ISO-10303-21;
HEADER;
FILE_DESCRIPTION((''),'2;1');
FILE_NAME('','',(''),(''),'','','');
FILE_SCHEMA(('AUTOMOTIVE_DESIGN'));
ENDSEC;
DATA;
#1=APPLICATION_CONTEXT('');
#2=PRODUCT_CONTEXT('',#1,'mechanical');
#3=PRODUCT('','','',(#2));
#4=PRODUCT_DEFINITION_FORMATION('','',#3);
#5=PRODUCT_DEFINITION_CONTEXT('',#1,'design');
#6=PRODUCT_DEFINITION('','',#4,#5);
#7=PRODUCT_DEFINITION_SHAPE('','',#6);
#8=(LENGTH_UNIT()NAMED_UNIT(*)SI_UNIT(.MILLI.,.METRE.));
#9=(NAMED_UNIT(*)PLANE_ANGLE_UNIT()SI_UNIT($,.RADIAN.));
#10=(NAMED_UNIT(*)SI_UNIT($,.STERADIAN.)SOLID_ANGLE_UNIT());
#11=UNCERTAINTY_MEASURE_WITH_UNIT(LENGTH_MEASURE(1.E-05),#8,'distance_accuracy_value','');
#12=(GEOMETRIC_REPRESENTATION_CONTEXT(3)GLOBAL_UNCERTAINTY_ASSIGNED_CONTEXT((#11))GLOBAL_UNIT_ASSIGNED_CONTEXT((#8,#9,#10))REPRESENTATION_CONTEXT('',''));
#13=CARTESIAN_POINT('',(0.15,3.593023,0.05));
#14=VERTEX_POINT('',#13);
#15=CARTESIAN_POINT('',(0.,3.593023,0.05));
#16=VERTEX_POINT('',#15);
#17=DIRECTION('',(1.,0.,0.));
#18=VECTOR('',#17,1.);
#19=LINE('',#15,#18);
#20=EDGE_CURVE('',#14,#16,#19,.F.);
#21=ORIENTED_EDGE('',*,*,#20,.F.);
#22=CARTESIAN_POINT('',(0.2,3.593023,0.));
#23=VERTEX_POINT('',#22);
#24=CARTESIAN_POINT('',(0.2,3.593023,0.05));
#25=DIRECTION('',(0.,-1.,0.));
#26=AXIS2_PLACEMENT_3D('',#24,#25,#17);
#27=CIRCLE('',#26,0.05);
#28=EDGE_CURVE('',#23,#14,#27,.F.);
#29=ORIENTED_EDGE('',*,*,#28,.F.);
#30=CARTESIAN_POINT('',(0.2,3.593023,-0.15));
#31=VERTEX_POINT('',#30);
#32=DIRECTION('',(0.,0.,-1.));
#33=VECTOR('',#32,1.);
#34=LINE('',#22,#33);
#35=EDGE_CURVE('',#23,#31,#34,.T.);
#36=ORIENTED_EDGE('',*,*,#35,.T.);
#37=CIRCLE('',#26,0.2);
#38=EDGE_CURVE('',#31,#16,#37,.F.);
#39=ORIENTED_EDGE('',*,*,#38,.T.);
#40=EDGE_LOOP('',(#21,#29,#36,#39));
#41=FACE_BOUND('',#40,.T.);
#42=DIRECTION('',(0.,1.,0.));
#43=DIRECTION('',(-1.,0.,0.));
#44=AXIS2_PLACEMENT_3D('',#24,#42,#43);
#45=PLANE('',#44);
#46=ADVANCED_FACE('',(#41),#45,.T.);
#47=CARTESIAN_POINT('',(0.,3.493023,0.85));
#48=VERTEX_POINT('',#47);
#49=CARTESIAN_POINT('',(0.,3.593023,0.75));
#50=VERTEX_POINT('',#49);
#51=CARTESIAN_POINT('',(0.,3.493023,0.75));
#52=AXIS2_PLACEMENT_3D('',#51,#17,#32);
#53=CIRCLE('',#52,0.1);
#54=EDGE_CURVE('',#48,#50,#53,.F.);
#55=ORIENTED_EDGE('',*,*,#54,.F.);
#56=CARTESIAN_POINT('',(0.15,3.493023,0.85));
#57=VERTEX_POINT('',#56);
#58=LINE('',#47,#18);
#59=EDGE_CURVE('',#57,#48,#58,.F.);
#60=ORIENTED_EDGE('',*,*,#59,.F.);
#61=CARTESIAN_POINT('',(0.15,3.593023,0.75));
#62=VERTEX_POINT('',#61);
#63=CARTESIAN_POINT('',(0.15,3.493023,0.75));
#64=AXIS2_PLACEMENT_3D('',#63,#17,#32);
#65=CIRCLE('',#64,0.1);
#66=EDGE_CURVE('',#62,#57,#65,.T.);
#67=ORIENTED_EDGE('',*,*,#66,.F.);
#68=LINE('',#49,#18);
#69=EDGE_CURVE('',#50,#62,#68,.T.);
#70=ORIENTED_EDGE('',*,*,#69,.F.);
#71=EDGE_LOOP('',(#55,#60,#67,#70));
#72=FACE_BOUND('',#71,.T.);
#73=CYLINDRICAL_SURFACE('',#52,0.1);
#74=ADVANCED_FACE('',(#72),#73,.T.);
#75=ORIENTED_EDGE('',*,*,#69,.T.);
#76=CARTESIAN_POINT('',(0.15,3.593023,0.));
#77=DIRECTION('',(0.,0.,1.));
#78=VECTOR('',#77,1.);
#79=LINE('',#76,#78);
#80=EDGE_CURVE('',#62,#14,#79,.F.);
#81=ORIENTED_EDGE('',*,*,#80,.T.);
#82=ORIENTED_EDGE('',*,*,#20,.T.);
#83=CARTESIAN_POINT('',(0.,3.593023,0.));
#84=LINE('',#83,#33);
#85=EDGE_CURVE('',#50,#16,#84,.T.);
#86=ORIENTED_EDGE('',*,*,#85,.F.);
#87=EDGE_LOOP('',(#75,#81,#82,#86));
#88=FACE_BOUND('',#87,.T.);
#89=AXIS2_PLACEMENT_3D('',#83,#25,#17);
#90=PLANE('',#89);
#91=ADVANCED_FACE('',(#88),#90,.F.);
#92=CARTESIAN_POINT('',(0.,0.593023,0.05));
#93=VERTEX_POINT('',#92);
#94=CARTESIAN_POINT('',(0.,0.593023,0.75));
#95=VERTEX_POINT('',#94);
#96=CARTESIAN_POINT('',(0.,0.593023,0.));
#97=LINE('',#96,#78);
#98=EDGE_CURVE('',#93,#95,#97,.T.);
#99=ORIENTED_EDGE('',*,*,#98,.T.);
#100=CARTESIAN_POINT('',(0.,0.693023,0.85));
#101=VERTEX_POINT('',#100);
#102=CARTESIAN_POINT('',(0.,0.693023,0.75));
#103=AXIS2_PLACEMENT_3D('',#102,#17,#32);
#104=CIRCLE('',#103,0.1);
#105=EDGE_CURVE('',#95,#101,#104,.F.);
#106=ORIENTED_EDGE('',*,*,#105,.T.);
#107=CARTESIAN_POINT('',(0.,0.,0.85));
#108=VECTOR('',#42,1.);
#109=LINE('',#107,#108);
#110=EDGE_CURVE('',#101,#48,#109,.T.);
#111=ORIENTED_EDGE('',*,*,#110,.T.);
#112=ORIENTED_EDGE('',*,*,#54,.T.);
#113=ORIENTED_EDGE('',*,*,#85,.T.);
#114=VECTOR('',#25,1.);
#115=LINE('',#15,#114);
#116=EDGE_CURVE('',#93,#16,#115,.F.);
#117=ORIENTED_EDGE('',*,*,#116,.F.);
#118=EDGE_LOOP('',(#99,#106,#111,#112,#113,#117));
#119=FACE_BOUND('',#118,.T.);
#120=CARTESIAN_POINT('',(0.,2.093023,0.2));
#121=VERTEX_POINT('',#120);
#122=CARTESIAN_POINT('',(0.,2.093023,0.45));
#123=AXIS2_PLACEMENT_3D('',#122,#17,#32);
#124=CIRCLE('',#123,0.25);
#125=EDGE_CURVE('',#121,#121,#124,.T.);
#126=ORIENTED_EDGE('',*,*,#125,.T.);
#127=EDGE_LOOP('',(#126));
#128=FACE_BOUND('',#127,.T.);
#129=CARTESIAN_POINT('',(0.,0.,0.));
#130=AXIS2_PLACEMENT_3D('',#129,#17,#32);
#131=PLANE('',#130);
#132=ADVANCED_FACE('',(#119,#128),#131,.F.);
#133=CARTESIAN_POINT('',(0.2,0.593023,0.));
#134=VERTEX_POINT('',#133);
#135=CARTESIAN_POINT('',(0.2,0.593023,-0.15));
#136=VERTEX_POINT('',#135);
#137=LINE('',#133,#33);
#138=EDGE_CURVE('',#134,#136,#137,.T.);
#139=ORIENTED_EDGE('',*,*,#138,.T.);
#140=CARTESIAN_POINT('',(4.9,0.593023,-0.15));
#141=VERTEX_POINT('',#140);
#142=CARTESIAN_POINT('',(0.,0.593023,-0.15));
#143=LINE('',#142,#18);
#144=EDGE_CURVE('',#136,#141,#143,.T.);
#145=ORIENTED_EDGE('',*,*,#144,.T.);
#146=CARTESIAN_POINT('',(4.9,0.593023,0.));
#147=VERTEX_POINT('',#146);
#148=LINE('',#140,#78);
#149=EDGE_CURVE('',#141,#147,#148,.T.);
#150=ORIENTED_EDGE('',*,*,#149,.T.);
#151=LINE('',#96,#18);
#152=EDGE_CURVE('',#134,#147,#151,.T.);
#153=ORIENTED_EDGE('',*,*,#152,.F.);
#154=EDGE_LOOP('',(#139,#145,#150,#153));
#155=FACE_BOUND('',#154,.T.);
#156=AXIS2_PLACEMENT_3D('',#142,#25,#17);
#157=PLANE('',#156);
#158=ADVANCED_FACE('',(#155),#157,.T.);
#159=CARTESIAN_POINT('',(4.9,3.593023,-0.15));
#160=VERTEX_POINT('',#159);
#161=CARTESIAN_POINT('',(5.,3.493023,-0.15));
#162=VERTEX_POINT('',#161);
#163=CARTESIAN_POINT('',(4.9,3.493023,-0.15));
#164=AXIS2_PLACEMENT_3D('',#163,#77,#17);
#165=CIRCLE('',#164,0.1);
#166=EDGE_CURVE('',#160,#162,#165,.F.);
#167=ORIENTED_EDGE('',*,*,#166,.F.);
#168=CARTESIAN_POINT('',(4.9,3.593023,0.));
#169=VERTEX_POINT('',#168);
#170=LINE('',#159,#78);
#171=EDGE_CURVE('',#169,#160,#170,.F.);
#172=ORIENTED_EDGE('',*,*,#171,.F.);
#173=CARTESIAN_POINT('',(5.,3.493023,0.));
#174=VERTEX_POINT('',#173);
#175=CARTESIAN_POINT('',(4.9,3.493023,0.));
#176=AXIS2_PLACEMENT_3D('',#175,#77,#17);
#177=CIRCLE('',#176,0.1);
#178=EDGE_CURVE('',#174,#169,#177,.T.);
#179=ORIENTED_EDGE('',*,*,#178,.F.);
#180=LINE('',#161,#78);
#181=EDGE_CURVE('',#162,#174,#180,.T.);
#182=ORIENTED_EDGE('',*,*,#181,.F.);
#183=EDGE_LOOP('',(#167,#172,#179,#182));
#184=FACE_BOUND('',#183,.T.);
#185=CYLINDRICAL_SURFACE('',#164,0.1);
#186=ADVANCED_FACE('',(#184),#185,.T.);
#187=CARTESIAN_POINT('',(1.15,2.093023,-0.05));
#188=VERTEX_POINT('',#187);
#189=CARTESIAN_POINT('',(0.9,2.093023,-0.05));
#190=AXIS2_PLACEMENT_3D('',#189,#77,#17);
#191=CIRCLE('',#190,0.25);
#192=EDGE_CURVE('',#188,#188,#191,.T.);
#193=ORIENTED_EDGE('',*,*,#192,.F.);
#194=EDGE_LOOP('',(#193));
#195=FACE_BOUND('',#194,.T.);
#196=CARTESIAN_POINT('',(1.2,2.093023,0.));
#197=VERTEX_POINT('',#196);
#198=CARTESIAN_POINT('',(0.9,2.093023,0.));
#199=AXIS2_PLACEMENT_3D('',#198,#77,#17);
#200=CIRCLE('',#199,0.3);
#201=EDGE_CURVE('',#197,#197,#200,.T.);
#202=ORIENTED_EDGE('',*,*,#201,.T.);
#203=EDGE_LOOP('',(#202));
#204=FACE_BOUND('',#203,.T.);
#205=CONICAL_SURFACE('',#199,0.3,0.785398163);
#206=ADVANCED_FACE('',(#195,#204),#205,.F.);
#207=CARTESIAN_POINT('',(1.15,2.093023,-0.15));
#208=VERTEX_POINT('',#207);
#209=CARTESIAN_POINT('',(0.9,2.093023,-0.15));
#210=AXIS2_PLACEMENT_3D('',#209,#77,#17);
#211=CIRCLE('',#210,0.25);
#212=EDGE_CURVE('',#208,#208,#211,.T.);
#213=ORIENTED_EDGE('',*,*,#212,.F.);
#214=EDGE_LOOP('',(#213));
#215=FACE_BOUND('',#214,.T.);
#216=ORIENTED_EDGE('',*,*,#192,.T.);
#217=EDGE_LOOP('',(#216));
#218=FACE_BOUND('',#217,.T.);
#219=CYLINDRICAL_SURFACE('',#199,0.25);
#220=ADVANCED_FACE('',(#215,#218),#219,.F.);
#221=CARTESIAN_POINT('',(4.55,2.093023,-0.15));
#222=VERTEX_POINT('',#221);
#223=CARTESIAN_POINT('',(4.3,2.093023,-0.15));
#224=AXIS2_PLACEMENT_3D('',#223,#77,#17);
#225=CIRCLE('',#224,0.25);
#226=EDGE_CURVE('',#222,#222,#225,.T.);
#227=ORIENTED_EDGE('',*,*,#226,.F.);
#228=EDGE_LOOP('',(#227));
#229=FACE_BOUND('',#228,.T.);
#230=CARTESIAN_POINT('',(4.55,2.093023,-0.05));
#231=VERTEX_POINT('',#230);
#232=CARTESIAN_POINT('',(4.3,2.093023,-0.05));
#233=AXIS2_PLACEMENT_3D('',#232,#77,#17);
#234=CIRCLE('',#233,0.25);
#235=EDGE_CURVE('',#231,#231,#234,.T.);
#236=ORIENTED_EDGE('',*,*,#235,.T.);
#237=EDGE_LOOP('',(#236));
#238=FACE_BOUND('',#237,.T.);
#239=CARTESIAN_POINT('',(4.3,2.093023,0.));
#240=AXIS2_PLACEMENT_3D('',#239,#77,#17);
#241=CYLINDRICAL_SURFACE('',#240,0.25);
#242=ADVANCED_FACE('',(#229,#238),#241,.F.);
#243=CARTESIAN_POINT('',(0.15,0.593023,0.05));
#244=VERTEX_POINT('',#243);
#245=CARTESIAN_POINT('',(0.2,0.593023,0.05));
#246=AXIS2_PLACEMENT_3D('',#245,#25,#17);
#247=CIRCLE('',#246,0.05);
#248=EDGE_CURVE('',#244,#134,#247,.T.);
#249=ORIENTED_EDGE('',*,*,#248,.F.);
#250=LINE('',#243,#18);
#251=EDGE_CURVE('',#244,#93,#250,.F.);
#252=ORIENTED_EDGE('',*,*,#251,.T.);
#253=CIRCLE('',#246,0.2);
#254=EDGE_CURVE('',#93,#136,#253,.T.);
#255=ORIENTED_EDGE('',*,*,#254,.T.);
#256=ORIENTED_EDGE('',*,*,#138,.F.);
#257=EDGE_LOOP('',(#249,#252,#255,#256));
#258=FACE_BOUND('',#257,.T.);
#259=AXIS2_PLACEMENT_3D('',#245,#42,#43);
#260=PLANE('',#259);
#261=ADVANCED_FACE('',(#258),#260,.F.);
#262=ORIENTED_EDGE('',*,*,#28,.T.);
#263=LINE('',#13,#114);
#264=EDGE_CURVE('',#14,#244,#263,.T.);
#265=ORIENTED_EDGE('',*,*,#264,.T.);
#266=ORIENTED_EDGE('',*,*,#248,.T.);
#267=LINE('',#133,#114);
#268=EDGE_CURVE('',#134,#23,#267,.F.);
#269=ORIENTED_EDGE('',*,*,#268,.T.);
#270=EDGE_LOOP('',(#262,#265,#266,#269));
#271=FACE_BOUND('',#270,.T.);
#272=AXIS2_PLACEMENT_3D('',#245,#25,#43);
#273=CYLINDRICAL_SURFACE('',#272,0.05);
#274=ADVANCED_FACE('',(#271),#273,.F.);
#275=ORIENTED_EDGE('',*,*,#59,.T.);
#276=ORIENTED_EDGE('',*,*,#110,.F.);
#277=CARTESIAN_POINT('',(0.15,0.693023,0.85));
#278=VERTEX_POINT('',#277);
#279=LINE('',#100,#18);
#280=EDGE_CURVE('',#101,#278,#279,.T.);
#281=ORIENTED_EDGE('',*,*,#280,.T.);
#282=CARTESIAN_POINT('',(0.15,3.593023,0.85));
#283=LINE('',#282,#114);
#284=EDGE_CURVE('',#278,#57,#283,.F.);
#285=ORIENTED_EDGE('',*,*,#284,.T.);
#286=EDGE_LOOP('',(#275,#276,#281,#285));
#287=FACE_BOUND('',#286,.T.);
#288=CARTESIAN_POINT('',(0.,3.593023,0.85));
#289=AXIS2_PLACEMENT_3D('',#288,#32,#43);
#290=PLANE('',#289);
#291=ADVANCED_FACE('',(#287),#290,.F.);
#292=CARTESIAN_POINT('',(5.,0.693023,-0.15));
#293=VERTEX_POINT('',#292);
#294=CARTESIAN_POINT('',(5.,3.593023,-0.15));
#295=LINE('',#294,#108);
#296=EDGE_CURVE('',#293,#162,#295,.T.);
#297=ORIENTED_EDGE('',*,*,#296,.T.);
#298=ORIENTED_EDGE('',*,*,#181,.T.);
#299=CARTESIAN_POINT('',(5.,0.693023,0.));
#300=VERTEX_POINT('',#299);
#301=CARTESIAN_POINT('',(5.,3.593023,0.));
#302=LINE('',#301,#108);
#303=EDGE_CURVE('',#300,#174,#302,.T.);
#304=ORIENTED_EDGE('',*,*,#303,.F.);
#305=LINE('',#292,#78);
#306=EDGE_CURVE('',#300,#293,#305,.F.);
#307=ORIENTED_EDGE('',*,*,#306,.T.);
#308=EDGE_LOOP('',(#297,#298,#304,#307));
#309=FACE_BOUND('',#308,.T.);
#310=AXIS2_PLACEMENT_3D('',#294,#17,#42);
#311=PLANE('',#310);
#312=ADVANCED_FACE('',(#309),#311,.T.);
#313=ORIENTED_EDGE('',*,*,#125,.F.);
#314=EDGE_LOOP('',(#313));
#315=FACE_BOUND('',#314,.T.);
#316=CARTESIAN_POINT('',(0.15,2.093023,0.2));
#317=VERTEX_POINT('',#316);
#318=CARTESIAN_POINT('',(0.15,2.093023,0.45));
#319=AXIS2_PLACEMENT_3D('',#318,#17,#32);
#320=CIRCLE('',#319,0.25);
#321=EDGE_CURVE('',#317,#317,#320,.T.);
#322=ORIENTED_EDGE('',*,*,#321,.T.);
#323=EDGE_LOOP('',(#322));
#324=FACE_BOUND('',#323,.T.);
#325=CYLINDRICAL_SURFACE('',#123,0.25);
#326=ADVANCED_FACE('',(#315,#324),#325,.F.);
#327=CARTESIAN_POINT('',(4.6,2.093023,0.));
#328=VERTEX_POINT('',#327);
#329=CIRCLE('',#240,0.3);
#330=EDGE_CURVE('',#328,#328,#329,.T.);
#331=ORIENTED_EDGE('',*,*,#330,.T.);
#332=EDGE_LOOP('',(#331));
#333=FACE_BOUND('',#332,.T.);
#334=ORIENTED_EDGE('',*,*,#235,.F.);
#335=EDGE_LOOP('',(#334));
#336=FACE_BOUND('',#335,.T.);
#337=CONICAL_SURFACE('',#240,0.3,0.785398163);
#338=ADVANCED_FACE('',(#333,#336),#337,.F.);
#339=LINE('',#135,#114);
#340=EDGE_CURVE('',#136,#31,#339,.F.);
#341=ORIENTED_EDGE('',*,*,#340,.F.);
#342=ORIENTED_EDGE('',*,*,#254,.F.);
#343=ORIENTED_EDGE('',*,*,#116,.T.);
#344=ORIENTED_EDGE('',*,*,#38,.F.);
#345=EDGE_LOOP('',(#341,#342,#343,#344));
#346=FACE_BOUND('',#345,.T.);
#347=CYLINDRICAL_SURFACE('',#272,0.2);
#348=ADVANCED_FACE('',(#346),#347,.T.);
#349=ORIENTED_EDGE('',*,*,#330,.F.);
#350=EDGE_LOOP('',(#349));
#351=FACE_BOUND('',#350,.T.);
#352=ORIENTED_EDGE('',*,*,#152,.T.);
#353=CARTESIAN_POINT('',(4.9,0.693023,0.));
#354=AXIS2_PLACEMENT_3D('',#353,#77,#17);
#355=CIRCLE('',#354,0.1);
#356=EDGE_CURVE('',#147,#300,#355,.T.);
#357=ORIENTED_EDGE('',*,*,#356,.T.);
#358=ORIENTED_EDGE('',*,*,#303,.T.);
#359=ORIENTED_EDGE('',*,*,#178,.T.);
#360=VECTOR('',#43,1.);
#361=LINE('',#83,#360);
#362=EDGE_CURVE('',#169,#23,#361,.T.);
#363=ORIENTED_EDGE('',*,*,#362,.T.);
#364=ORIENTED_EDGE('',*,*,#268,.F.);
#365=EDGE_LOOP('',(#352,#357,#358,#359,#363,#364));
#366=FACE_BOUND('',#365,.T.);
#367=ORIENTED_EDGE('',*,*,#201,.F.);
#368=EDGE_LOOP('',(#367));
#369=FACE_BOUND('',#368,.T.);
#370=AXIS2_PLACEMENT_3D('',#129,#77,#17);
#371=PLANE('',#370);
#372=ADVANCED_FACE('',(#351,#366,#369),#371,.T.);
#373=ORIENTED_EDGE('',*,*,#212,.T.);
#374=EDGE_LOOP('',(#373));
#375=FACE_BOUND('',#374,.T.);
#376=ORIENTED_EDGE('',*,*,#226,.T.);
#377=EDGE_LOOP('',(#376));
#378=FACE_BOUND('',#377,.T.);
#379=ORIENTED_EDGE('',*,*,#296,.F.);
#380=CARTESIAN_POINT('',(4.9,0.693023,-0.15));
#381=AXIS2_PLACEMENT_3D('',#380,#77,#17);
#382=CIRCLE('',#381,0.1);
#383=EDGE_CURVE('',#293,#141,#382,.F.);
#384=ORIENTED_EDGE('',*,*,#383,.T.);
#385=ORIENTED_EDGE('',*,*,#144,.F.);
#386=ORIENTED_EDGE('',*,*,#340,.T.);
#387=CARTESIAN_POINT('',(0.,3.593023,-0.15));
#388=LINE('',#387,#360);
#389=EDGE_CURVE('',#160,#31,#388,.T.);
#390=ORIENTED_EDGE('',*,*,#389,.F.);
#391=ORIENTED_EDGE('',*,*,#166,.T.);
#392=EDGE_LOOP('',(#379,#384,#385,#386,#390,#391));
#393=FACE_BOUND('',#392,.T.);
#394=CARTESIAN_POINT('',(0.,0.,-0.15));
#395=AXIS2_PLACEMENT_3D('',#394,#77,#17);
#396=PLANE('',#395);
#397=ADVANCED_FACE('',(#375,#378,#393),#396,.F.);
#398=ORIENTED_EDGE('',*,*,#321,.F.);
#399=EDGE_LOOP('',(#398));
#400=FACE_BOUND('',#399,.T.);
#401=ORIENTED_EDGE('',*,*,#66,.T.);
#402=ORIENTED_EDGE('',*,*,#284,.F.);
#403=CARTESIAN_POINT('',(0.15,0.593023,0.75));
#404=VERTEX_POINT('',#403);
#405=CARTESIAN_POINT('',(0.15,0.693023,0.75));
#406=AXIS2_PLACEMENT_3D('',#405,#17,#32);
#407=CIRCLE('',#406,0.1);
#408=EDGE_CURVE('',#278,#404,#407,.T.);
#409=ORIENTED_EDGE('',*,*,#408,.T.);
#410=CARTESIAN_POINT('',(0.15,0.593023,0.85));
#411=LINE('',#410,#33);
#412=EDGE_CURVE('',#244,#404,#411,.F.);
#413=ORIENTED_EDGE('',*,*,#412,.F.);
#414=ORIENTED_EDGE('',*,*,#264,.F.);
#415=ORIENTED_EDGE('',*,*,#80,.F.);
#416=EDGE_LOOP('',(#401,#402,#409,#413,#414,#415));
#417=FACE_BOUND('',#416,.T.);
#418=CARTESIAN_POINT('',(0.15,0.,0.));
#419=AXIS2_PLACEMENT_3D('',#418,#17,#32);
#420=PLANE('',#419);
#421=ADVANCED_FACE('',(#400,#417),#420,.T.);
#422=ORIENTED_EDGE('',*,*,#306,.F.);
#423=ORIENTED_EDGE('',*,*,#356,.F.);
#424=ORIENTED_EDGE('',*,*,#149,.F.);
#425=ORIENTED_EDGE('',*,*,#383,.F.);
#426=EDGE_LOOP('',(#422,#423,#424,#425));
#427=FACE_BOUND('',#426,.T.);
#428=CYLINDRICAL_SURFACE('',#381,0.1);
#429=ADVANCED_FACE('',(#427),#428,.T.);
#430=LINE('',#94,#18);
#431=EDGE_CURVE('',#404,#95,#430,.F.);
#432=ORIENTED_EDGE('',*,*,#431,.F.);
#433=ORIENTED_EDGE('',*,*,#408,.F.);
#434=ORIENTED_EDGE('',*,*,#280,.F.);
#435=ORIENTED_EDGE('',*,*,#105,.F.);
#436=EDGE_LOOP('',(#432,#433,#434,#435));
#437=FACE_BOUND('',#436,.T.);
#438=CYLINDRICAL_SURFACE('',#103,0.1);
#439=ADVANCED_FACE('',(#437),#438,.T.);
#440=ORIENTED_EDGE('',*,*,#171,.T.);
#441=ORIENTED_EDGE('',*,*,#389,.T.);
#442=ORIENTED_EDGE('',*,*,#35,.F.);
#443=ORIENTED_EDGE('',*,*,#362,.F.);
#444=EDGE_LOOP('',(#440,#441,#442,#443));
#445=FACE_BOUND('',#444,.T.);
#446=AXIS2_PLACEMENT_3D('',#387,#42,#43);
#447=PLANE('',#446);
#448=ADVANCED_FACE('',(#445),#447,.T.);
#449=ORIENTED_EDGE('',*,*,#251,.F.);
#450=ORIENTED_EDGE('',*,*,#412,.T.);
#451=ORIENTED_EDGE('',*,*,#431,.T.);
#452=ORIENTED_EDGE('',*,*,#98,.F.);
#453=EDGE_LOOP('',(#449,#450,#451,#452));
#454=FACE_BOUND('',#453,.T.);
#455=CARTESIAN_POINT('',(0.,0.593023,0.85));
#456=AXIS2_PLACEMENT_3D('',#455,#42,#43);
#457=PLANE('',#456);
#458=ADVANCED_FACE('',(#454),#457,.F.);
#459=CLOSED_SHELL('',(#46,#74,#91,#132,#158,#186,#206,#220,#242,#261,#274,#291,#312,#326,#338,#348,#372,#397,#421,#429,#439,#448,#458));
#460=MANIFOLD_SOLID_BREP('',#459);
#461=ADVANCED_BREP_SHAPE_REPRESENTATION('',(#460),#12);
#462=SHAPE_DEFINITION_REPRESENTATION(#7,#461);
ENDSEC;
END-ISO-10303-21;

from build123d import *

# Parameters (mm, degrees)
SKETCH2_W                                      = 5
SKETCH2_H                                      = 3
BASE_FLANGE1_DEPTH                             = 0.15
EDGE_FLANGE1_STRIP_W                           = 0.7
EDGE_FLANGE1_STRIP_H                           = 0.15
EDGE_FLANGE1_STRIP_CUT_DEPTH                   = 3
EDGE_FLANGE1_DEPTH                             = 3
SKETCH14_R                                     = 0.25
CUT_EXTRUDE1_DEPTH                             = 7.095475053
CSK_FOR_M2_FLAT_HEAD_MACHINE_SCREW1_AT_2_COUNT = 2
CSK_FOR_M2_FLAT_HEAD_MACHINE_SCREW1_AT_2_PITCH = 3.4
FILLET1_R                                      = 0.1


# Sheet-metal steps are written as plain solids
with BuildPart() as part:
    # Sketch2 → Base-Flange1 (new body)
    with BuildSketch(Plane.XY):
        with Locations((2.5, 2.093023256)):
            Rectangle(SKETCH2_W, SKETCH2_H)
    extrude(amount=-BASE_FLANGE1_DEPTH)

    # Edge-Flange1 strip (across the edge) → Edge-Flange1 strip cut (cut)
    with BuildSketch(Plane.XZ.offset(-3.593023256)):
        with Locations((-0.15, -0.075)):
            Rectangle(EDGE_FLANGE1_STRIP_W, EDGE_FLANGE1_STRIP_H)
    extrude(amount=EDGE_FLANGE1_STRIP_CUT_DEPTH, mode=Mode.SUBTRACT)

    # Edge-Flange1 section (across the edge) → Edge-Flange1 (add)
    with BuildSketch(Plane.XZ.offset(-3.593023256)):
        with BuildLine():
            Line((0, 0.05), (0, 0.85))
            Line((0, 0.85), (0.15, 0.85))
            Line((0.15, 0.85), (0.15, 0.05))
            ThreePointArc((0.15, 0.05), (0.164644661, 0.014644661), (0.2, 0))
            Line((0.2, 0), (0.2, -0.15))
            ThreePointArc((0.2, -0.15), (0.058578644, -0.091421356), (0, 0.05))
        make_face()
    extrude(amount=EDGE_FLANGE1_DEPTH)

    # Sketch14 → Cut-Extrude1 (cut, through all)
    with BuildSketch(Plane(origin=(0.15, 0, 0), x_dir=(0, 0, -1), z_dir=(1, 0, 0))):
        with Locations((-0.45, 2.093023256)):
            Circle(SKETCH14_R)
    extrude(amount=-CUT_EXTRUDE1_DEPTH, mode=Mode.SUBTRACT)

    # Sketch17 → CSK for M2 Flat Head Machine Screw1 (revolve, cut)
    with BuildSketch(Plane(origin=(0.9, 2.093023256, 0), x_dir=(0, -1, 0), z_dir=(1, 0, 0))):
        Polygon((0, 0), (0, 0.15), (0.25, 0.15), (0.25, 0.05), (0.3, 0), align=None)
    csk_for_m2_flat_head_machine_screw1 = revolve(axis=Axis((0.9, 2.093023256, 6.35), (0, 0, -1)), mode=Mode.SUBTRACT)

    # CSK for M2 Flat Head Machine Screw1 at 2: CSK for M2 Flat Head Machine Screw1 ×2
    with Locations(*[(i * CSK_FOR_M2_FLAT_HEAD_MACHINE_SCREW1_AT_2_PITCH, 0, 0) for i in range(1, CSK_FOR_M2_FLAT_HEAD_MACHINE_SCREW1_AT_2_COUNT)]):
        add(csk_for_m2_flat_head_machine_screw1, mode=Mode.SUBTRACT)

    # Fillet1
    fillet1_edges = [part.edges().sort_by_distance(p)[0] for p in [
        (0.075, 3.593023256, 0.85),
        (0.075, 0.593023256, 0.85),
        (5, 3.593023256, -0.075),
        (5, 0.593023256, -0.075),
    ]]
    fillet(fillet1_edges, radius=FILLET1_R)


solid = part.part
